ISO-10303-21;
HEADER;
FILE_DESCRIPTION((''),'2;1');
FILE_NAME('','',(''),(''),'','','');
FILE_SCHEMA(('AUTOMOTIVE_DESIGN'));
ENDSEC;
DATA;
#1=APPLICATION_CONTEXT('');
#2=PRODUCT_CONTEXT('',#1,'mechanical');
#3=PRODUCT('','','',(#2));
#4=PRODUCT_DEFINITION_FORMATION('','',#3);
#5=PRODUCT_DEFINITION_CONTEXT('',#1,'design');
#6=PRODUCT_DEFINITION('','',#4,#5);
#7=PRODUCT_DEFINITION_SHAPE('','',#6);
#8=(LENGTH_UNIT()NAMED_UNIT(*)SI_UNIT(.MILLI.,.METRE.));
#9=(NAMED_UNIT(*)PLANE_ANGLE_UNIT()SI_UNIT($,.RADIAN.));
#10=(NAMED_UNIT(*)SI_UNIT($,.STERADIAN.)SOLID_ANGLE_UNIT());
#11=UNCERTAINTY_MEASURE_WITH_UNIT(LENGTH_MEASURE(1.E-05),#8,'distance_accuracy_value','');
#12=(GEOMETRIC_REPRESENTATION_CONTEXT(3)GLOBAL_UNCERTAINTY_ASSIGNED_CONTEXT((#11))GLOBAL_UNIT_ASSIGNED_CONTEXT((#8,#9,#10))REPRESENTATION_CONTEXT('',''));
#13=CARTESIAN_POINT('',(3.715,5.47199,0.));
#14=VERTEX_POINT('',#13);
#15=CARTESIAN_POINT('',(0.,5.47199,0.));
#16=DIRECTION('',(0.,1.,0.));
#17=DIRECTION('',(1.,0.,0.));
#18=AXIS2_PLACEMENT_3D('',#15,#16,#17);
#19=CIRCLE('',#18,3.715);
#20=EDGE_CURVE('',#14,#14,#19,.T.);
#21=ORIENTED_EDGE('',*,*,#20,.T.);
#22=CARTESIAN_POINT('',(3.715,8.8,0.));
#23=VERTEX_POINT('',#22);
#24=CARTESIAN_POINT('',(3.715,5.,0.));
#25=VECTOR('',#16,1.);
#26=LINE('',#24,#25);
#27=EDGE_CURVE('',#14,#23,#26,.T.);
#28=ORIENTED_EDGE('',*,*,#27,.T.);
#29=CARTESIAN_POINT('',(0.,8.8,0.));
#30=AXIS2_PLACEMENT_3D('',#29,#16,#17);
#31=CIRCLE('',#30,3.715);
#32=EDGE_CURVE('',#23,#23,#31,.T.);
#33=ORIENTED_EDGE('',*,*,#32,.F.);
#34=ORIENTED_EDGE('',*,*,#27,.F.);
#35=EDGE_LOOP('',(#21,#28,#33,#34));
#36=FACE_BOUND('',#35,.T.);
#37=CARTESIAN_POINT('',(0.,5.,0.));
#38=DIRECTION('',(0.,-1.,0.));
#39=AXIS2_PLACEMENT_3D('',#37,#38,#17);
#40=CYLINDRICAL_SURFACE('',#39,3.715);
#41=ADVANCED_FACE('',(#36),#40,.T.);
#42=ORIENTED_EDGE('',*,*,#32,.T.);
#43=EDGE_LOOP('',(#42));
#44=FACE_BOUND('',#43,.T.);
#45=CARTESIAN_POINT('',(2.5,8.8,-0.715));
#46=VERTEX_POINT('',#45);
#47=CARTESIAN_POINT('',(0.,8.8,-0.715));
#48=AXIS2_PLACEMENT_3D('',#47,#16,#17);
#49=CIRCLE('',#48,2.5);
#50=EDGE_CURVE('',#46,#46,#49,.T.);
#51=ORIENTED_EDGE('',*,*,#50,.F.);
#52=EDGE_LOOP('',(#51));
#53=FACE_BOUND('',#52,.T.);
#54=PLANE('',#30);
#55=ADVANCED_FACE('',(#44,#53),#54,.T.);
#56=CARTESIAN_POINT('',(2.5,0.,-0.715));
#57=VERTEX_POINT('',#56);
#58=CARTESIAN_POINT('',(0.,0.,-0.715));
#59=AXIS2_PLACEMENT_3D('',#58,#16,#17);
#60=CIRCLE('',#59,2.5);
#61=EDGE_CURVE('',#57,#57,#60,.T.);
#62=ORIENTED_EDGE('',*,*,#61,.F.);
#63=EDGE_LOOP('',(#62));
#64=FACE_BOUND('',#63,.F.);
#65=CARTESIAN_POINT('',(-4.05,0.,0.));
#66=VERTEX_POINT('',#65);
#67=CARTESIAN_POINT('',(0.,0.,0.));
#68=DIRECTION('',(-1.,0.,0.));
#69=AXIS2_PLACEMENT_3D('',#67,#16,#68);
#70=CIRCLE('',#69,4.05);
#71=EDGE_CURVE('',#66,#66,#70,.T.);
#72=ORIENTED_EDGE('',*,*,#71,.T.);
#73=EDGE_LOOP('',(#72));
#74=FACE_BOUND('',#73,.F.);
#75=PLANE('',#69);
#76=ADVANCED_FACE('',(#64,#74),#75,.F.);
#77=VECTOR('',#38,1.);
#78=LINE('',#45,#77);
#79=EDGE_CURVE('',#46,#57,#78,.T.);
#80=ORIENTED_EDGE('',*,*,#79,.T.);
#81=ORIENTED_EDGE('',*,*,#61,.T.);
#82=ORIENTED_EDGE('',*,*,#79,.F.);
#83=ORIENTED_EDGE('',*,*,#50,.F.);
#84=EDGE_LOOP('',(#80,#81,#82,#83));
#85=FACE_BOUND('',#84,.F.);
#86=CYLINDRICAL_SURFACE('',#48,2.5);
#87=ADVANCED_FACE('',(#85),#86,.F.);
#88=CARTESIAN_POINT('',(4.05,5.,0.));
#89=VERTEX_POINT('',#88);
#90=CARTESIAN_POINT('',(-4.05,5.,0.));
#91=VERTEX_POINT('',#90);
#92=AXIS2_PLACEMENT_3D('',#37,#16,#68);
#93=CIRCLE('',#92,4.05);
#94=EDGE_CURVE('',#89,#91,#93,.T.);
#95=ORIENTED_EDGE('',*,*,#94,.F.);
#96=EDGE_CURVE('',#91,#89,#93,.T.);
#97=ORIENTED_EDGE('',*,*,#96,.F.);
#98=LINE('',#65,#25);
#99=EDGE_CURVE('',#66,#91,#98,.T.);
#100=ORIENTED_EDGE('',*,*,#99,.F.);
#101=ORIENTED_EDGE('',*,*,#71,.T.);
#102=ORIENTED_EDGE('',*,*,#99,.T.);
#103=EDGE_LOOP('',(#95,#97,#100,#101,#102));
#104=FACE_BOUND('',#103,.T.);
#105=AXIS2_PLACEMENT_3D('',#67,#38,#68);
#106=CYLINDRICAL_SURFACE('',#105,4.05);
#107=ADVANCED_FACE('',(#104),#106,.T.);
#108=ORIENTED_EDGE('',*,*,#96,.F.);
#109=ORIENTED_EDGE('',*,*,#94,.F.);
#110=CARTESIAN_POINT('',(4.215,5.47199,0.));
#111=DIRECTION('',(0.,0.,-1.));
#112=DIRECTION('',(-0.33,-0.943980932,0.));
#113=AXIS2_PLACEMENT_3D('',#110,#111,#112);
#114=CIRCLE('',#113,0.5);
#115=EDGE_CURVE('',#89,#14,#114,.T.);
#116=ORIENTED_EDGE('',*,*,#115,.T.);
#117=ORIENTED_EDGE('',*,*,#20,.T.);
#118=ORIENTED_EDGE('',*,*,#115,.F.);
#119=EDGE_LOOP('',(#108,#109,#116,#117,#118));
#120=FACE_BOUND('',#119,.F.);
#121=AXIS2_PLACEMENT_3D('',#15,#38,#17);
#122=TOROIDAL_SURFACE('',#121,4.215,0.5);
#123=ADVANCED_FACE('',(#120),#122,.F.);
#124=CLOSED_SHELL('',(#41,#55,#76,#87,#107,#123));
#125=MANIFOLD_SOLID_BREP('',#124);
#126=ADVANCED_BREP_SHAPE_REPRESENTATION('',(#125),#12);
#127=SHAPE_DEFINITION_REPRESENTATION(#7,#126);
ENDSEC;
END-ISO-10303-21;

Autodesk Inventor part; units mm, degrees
ref_plane "YZ Plane" through (0, 0, 0) normal (1, 0, 0) x (0, 1, 0)
ref_plane "XZ Plane" through (0, 0, 0) normal (0, 1, 0) x (-1, 0, 0)
ref_plane "XY Plane" through (0, 0, 0) normal (0, 0, 1) x (1, 0, 0)
sketch "Boceto1" plane through (0, 0, 0) normal (0, 1, 0) x (-1, 0, 0)
  circle A0 centre (0, 0) radius 4.05
  dimension "d0" = 8.1
extrude "Extrusión1" add sketch "Boceto1" along normal blind 5
sketch "Boceto2" plane through (0, 5, 0) normal (0, 1, 0) x (1, 0, 0)
  circle A0 centre (0, 0) radius 3.715
  dimension "d3" = 7.43
extrude "Extrusión2" add sketch "Boceto2" along normal blind 3.8
fillet "Empalme2" radius 0.5 1 edges at (-3.715, 5, 0)
sketch "Boceto14" plane through (0, 8.8, 0) normal (0, 1, 0) x (1, 0, 0)
  circle A0 centre (0, 0) radius 3.715 projected
  line L0 (0, 3.715) -> (0, 3.215)
  line L1 (0, 3.215) -> (0, 0.715)
  circle A1 centre (0, 0.715) radius 2.5
  dimension "d72" = 0.5
  dimension "d73" = 2.5
extrude "Extrusión7" cut sketch "Boceto14" against normal through all contours A1
equation "\"d23\" = 55deg"
equation "\"Boceto5_Pitch\" = 0.8"
equation "\"d45\" = 55deg"
equation "\"Boceto8_Pitch\" = 0.8"
properties part number "interior"
